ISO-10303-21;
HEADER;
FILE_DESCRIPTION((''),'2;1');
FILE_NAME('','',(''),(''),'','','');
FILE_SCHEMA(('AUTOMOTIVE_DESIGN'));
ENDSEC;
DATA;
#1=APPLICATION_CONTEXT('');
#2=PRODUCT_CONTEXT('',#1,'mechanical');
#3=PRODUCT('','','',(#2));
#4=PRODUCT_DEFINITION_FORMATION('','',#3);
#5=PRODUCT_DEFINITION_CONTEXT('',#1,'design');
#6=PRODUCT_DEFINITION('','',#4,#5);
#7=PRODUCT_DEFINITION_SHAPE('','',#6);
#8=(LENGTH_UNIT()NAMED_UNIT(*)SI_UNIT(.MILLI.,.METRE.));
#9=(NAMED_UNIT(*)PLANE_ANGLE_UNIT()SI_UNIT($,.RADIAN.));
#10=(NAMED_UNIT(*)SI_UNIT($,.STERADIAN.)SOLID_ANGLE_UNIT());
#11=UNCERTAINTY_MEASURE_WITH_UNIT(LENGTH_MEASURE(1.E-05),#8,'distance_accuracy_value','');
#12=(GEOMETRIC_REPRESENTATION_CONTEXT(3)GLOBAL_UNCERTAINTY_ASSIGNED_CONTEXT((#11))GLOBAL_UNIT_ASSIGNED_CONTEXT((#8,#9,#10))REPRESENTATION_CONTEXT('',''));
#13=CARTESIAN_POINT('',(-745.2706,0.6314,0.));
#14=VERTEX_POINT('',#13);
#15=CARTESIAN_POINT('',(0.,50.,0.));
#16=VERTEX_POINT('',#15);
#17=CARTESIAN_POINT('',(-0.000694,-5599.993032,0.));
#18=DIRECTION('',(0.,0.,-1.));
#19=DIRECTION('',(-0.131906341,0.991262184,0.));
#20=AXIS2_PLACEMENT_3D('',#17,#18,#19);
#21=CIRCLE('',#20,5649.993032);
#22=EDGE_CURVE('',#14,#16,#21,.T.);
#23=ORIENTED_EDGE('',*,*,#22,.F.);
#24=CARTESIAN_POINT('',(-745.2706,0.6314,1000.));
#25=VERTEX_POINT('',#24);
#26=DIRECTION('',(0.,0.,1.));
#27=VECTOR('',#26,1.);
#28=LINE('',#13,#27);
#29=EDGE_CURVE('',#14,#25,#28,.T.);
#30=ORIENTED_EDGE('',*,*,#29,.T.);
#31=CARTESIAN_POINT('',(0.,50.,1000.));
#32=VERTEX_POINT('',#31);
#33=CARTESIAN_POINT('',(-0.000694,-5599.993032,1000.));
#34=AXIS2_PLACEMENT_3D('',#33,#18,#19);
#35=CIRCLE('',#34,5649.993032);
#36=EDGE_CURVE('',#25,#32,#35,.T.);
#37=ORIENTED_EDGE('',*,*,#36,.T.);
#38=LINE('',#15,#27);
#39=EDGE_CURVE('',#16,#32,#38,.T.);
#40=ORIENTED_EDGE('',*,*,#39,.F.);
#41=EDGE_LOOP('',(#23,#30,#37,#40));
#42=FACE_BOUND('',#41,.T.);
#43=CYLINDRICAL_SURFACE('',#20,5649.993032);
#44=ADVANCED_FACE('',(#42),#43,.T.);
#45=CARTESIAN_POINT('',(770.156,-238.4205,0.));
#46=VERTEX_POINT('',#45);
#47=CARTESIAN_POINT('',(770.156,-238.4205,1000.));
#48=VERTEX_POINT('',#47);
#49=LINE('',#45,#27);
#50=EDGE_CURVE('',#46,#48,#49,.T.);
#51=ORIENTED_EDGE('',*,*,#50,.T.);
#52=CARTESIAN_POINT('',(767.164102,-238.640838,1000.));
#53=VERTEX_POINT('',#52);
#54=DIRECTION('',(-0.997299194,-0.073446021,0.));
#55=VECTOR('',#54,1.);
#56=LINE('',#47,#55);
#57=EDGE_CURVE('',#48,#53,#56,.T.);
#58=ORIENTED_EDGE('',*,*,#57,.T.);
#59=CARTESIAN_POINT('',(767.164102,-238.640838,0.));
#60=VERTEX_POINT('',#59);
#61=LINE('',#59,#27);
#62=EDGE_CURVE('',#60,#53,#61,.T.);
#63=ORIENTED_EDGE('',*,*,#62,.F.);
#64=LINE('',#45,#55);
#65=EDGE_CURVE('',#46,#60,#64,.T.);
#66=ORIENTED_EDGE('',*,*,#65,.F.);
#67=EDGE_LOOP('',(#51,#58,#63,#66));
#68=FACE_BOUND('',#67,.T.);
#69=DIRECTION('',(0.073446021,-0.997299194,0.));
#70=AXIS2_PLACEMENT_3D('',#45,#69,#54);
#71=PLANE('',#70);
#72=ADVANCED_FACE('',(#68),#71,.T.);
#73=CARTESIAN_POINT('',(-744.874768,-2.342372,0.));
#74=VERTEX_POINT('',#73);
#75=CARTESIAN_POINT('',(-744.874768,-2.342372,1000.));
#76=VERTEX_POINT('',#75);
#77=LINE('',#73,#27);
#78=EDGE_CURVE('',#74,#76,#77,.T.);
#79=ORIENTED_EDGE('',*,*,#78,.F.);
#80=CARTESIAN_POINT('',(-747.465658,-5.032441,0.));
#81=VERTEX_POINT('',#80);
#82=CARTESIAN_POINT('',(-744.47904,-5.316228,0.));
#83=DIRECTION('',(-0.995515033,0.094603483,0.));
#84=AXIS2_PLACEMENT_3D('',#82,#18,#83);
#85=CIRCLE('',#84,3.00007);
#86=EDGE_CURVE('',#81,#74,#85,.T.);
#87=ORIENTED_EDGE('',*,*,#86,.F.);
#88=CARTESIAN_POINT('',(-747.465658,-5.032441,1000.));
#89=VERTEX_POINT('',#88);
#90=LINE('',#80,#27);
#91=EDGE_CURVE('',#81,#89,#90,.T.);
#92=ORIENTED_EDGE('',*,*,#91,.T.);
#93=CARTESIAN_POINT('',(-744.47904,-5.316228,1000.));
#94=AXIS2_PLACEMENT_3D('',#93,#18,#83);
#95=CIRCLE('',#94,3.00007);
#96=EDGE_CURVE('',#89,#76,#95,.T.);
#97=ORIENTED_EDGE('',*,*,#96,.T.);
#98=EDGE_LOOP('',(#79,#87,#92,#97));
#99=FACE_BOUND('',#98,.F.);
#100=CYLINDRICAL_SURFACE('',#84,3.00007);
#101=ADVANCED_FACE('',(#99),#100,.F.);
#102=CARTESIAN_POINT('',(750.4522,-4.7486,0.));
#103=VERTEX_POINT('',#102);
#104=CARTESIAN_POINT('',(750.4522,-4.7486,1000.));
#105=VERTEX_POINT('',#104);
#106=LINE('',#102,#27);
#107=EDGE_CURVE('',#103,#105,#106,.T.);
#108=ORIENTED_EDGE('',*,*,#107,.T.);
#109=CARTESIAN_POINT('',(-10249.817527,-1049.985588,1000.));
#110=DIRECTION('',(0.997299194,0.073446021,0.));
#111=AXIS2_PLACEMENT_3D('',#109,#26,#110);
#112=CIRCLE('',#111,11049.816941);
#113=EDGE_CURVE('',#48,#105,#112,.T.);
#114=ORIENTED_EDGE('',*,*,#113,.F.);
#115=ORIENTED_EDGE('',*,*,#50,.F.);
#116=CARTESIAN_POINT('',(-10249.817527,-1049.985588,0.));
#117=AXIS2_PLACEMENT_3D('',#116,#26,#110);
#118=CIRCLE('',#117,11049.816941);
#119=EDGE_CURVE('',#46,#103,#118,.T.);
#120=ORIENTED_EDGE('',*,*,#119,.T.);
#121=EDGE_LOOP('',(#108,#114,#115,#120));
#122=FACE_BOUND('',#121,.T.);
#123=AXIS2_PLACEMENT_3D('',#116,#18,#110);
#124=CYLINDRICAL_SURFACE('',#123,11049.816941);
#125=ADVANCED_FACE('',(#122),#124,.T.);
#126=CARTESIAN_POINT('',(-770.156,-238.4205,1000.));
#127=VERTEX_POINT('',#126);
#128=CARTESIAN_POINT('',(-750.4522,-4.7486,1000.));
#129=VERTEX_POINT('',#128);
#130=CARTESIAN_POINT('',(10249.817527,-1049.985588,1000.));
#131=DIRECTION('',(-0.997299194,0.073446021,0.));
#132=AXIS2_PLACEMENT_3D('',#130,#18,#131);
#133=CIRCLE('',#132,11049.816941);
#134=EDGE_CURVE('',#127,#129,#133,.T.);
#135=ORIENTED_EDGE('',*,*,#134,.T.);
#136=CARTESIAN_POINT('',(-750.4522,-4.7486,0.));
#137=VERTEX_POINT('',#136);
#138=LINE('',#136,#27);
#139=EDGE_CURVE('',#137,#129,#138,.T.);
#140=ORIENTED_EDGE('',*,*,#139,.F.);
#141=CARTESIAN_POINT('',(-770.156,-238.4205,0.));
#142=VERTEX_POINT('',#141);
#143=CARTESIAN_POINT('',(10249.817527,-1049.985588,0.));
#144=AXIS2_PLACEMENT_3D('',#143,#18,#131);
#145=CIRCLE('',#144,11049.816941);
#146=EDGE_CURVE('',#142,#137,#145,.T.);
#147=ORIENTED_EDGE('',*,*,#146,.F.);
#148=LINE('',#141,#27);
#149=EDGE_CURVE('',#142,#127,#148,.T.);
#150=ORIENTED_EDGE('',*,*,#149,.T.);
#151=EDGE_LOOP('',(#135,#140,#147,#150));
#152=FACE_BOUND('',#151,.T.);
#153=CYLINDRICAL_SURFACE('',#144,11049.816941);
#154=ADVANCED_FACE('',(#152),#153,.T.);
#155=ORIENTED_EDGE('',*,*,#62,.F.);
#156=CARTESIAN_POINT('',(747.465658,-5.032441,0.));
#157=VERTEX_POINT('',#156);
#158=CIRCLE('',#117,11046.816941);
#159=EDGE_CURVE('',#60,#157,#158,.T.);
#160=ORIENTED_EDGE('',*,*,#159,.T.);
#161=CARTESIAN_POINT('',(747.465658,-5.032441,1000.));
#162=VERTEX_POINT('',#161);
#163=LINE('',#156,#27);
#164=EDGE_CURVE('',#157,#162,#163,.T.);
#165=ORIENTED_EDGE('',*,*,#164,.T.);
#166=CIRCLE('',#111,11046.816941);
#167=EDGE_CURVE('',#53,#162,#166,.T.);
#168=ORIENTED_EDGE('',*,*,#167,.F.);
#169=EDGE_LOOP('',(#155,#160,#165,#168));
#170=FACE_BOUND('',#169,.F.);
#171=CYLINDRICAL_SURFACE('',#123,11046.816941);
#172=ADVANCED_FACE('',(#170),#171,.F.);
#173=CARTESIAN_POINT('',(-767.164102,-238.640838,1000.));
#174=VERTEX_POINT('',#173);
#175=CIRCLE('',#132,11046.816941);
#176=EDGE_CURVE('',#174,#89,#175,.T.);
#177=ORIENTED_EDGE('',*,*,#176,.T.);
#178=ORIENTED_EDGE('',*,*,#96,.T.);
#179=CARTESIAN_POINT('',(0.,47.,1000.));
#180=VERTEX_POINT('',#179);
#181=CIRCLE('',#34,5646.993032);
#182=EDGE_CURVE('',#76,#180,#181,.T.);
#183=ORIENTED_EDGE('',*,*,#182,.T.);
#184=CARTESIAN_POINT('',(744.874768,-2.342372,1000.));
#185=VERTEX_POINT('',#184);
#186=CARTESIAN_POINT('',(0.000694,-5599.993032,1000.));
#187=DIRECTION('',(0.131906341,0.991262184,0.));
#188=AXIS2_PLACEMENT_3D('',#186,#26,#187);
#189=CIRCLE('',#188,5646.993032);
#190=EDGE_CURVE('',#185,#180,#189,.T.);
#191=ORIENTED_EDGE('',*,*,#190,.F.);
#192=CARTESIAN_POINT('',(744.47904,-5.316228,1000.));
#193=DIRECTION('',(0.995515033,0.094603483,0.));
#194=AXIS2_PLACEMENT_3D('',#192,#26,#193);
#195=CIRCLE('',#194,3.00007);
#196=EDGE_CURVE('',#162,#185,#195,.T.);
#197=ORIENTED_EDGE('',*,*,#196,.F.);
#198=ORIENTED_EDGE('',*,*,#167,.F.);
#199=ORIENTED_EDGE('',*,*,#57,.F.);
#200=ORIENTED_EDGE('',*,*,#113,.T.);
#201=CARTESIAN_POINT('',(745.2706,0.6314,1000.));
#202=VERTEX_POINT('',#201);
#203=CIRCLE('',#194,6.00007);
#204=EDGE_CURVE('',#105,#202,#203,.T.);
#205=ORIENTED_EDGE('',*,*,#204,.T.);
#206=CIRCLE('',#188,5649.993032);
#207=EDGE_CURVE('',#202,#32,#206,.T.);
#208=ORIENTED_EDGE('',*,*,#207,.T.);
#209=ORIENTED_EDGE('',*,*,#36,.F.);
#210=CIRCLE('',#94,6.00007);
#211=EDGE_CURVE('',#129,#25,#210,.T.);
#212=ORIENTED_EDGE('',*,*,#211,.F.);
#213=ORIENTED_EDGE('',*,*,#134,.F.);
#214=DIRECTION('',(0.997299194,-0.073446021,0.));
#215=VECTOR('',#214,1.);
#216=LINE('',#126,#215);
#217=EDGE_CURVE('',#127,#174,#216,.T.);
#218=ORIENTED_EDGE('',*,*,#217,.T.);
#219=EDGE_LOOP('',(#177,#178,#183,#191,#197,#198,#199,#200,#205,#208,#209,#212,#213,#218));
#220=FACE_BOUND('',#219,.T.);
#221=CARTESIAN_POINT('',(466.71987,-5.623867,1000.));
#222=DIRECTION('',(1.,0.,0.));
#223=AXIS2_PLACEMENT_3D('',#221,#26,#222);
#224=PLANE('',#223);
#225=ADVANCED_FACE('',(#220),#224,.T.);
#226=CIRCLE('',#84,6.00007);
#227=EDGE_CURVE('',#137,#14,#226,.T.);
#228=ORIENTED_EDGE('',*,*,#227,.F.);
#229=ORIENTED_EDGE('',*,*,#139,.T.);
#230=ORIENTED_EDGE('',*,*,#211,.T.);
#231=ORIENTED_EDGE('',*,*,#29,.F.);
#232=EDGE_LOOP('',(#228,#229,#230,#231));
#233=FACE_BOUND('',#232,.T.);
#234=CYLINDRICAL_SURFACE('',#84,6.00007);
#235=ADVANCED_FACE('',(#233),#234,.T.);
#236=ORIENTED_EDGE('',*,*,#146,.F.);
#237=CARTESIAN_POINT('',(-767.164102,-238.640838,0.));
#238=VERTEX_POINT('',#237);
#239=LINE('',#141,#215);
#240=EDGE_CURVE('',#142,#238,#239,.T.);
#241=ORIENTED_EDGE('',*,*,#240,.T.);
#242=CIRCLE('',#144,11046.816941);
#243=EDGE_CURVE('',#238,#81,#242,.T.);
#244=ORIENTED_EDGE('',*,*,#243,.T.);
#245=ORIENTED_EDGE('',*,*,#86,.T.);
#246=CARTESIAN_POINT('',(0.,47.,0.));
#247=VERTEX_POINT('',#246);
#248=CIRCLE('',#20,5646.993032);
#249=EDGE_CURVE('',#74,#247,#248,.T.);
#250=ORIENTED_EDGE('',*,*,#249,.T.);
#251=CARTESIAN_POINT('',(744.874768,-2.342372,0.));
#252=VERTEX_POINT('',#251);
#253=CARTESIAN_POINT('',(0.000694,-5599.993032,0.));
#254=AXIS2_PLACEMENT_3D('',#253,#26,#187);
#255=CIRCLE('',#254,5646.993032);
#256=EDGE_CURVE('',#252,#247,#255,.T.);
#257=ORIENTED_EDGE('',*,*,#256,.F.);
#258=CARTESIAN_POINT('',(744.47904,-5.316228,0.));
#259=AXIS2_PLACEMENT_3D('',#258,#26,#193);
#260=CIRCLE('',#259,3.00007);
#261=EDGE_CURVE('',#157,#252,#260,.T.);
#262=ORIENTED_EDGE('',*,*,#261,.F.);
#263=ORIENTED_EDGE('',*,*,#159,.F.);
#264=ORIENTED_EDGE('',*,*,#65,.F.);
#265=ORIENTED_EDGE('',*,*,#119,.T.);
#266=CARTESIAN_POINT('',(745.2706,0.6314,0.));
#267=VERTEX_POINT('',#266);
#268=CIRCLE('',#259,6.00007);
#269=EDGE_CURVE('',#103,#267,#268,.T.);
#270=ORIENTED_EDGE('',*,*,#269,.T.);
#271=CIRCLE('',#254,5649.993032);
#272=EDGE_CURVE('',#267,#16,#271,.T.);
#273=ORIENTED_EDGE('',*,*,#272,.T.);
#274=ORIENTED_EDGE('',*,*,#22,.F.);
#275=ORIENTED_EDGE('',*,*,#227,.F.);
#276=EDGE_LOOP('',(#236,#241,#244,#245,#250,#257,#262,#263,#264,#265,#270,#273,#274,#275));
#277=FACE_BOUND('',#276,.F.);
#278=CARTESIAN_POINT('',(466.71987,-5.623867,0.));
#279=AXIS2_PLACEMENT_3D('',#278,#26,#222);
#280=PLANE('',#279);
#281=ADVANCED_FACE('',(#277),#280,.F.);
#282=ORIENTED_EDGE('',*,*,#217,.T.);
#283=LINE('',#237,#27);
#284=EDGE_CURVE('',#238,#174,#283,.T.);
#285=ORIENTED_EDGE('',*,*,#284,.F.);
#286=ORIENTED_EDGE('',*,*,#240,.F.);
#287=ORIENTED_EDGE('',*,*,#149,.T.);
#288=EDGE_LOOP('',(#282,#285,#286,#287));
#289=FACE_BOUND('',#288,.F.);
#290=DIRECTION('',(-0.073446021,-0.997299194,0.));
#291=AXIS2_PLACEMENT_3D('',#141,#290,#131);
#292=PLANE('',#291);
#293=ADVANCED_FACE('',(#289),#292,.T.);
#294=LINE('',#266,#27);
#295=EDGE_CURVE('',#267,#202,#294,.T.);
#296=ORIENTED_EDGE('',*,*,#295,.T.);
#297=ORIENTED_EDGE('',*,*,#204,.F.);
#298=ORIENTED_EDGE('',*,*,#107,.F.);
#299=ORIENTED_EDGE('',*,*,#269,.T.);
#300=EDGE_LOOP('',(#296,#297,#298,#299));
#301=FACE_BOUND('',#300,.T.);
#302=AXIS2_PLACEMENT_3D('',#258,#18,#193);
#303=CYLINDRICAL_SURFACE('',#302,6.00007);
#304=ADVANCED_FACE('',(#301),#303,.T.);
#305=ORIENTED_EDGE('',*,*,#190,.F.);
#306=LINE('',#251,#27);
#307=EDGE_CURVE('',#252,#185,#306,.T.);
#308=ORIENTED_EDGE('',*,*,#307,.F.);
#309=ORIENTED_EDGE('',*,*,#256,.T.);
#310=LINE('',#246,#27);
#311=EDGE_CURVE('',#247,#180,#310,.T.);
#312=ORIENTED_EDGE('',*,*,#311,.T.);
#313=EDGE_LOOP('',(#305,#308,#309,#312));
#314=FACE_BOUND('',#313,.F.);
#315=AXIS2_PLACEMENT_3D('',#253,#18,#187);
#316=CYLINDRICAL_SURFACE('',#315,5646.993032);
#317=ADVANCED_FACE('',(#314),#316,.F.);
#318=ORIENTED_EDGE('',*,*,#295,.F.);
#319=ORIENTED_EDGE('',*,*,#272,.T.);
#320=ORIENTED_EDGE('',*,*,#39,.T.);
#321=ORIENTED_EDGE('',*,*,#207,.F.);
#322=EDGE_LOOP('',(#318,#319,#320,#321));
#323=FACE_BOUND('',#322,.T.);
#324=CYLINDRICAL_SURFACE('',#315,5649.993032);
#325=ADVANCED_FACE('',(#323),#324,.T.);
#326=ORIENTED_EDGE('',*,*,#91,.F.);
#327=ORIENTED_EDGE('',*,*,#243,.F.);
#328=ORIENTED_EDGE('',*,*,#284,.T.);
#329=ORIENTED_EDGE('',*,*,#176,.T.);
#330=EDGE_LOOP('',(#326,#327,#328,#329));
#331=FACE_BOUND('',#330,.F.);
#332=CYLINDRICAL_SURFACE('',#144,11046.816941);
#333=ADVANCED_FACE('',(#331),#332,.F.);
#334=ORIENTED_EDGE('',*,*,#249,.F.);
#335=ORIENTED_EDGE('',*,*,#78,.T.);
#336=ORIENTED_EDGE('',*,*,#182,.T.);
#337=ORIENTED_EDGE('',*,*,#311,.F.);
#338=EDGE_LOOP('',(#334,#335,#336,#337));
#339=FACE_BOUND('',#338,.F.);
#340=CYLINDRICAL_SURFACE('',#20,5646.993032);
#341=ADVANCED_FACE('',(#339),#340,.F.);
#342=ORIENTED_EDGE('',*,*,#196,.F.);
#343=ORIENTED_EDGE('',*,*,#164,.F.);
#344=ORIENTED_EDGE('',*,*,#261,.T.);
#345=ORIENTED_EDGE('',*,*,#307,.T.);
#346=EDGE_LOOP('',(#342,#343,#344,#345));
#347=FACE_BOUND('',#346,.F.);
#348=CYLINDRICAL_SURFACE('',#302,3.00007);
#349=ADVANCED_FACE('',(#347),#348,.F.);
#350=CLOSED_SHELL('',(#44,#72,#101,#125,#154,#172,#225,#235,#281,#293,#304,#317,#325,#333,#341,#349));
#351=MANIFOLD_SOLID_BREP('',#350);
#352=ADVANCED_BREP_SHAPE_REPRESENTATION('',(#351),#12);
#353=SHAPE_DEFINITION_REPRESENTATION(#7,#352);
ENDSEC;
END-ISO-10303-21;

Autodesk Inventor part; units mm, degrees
ref_plane "YZ Plane" through (0, 0, 0) normal (1, 0, 0) x (0, 1, 0)
ref_plane "XZ Plane" through (0, 0, 0) normal (0, 1, 0) x (-1, 0, 0)
ref_plane "XY Plane" through (0, 0, 0) normal (0, 0, 1) x (1, 0, 0)
sketch "Sketch1" plane through (0, 0, 0) normal (0, 0, 1) x (1, 0, 0)
  line L0 (-750, 0) -> (750, 0) construction
  line L1 (750, 0) -> (750, -2700) construction
  line L2 (750, -2700) -> (-750, -2700) construction
  line L3 (-750, -2700) -> (-750, 0) construction
  line L4 (800, 50) -> (-800, 50) construction
  line L5 (-800, 50) -> (-800, -2750) construction
  line L6 (-800, -2750) -> (800, -2750) construction
  line L7 (800, -2750) -> (800, 50) construction
  line L8 (-850, 100) -> (850, 100) construction
  line L9 (850, 100) -> (850, -2800) construction
  line L10 (850, -2800) -> (-850, -2800) construction
  line L11 (-850, -2800) -> (-850, 100) construction
  arc A0 (750, 0) -> (745.2706, 0.6314) centre (0, -5600) ccw construction
  line L12 (-750, -2100) -> (750, -2100) construction
  line L13 (114.1118, -2698.3696) -> (750, -2100) construction
  arc A1 (750, -2100) -> (770.156, -238.4205) centre (-10250, -1050) ccw construction
  line L14 (750, 0) -> (749.6018, -2.9735) construction
  arc A2 (750, -3.0268) -> (0, 47) centre (-0.2, -5603) ccw construction
  line L15 (750, 0) -> (747.0136, -0.2851) construction
  arc A3 (767.1641, -238.6409) -> (747.4657, -5.0326) centre (-10252.9895, -1050.2527) ccw construction
  arc A4 (750.4522, -4.7486) -> (745.2706, 0.6314) centre (744.4791, -5.3162) ccw
  arc A5 (747.4657, -5.0326) -> (744.8748, -2.3426) centre (744.4792, -5.3164) ccw construction
  line L16 (750, -2100) -> (752.9864, -2100.2851) construction
  arc A6 (752.9864, -2100.2851) -> (771.2831, -213.263) centre (-10246.9891, -1050.0292) ccw construction
  line L17 (750, -2100) -> (752.0559, -2102.1848) construction
  line L18 (752.0559, -2102.1848) -> (752.0559, -2102.1848) construction
  arc A7 (749.1768, -2100.7746) -> (750.1074, -2098.8746) centre (747.1209, -2098.5898) ccw construction
  line L19 (0, -2697) -> (110, -2697) construction
  line L20 (112.0559, -2696.1848) -> (685.3133, -2156.7506) construction
  arc A8 (110, -2700) -> (114.1118, -2698.3696) centre (110, -2694) ccw construction
  arc A9 (110, -2697) -> (112.0559, -2696.1848) centre (110, -2694) ccw construction
  line L21 (685.3133, -2156.7506) -> (687.3692, -2158.9354) construction
  line L22 (752.0559, -2102.1848) -> (671.2185, -2178.2526) construction
  line L23 (671.2185, -2178.2526) -> (669.1626, -2176.0678) construction
  arc A10 (747.4657, -5.0326) -> (747.0136, -0.2851) centre (-10252.9895, -1050.2527) ccw construction
  arc A11 (745.2706, 0.6314) -> (0, 50) centre (0, -5600) ccw
  arc A12 (750.4522, -4.7486) -> (750, 0) centre (-10250, -1050) ccw construction
  line L24 (770.156, -238.4205) -> (767.1641, -238.6409) construction
  line L25 (768.2917, -213.4901) -> (771.2831, -213.263) construction
  arc A13 (770.156, -238.4205) -> (750.4522, -4.7486) centre (-10250, -1050) ccw
  line L26 (0, 100) -> (0, 50) construction
  line L27 (0, -2700) -> (0, -2697) construction
  line L28 (0, 47) -> (0, 0) construction
  line L29 (0, 50) -> (0, 47) construction
  arc A14 (752.0559, -2102.1848) -> (752.9864, -2100.2851) centre (749.9998, -2099.9999) ccw construction
  point P0 (0, -2750)
  dimension "d54" = 1500
  dimension "d55" = 2700
  dimension "d58" = 2100
  dimension "d68" = 6
  dimension "d70" = 3
  dimension "d75" = 3
  dimension "d83" = 6
  dimension "d86" = 3
  dimension "d112" = 239.271
  dimension "d113" = 50
  dimension "d114" = 50
  dimension "d115" = 3
  dimension "d117" = 110
  dimension "d118" = 25
  dimension "d119" = 111
  dimension "d120" = 25
contour flange "Contour Flange2" sketch "Sketch1" thickness 3 bend radius 3 width 1000 along (0, 0, 1) mid plane no both sides no wall seen from (760.924, -121.5323, 0) lies toward (-0.9964637, -0.0840242, 0) curves A13 A4 A11
bend "Bend2"
corner "Corner2"
mirror "Mirror2" about plane through (0, 0, 0) normal (1, 0, 0)
equation "\"d36\" = Thickness"
equation "\"d37\" = BendReliefWidth"
equation "\"d38\" = BendReliefDepth"
equation "\"d39\" = MinimumRemnant"
equation "\"d40\" = TransitionRadius"
equation "\"d42\" = BendRadius"
equation "\"d44\" = CornerReliefSize"
equation "\"d45\" = GapSize"
equation "\"d46\" = JacobiRadiusSize"
equation "\"BendRadius\" = Thickness"
equation "\"BendReliefWidth\" = Thickness"
equation "\"BendReliefDepth\" = 0.5 * Thickness"
equation "\"CornerReliefSize\" = 4 * Thickness"
equation "\"MinimumRemnant\" = 2 * Thickness"
equation "\"TransitionRadius\" = BendRadius"
equation "\"JacobiRadiusSize\" = BendRadius"
equation "\"GapSize\" = Thickness"
equation "\"Thickness\" = 3"
properties part number "МОО 033 лист спина базовый" material "Stainless Steel AISI 304"
